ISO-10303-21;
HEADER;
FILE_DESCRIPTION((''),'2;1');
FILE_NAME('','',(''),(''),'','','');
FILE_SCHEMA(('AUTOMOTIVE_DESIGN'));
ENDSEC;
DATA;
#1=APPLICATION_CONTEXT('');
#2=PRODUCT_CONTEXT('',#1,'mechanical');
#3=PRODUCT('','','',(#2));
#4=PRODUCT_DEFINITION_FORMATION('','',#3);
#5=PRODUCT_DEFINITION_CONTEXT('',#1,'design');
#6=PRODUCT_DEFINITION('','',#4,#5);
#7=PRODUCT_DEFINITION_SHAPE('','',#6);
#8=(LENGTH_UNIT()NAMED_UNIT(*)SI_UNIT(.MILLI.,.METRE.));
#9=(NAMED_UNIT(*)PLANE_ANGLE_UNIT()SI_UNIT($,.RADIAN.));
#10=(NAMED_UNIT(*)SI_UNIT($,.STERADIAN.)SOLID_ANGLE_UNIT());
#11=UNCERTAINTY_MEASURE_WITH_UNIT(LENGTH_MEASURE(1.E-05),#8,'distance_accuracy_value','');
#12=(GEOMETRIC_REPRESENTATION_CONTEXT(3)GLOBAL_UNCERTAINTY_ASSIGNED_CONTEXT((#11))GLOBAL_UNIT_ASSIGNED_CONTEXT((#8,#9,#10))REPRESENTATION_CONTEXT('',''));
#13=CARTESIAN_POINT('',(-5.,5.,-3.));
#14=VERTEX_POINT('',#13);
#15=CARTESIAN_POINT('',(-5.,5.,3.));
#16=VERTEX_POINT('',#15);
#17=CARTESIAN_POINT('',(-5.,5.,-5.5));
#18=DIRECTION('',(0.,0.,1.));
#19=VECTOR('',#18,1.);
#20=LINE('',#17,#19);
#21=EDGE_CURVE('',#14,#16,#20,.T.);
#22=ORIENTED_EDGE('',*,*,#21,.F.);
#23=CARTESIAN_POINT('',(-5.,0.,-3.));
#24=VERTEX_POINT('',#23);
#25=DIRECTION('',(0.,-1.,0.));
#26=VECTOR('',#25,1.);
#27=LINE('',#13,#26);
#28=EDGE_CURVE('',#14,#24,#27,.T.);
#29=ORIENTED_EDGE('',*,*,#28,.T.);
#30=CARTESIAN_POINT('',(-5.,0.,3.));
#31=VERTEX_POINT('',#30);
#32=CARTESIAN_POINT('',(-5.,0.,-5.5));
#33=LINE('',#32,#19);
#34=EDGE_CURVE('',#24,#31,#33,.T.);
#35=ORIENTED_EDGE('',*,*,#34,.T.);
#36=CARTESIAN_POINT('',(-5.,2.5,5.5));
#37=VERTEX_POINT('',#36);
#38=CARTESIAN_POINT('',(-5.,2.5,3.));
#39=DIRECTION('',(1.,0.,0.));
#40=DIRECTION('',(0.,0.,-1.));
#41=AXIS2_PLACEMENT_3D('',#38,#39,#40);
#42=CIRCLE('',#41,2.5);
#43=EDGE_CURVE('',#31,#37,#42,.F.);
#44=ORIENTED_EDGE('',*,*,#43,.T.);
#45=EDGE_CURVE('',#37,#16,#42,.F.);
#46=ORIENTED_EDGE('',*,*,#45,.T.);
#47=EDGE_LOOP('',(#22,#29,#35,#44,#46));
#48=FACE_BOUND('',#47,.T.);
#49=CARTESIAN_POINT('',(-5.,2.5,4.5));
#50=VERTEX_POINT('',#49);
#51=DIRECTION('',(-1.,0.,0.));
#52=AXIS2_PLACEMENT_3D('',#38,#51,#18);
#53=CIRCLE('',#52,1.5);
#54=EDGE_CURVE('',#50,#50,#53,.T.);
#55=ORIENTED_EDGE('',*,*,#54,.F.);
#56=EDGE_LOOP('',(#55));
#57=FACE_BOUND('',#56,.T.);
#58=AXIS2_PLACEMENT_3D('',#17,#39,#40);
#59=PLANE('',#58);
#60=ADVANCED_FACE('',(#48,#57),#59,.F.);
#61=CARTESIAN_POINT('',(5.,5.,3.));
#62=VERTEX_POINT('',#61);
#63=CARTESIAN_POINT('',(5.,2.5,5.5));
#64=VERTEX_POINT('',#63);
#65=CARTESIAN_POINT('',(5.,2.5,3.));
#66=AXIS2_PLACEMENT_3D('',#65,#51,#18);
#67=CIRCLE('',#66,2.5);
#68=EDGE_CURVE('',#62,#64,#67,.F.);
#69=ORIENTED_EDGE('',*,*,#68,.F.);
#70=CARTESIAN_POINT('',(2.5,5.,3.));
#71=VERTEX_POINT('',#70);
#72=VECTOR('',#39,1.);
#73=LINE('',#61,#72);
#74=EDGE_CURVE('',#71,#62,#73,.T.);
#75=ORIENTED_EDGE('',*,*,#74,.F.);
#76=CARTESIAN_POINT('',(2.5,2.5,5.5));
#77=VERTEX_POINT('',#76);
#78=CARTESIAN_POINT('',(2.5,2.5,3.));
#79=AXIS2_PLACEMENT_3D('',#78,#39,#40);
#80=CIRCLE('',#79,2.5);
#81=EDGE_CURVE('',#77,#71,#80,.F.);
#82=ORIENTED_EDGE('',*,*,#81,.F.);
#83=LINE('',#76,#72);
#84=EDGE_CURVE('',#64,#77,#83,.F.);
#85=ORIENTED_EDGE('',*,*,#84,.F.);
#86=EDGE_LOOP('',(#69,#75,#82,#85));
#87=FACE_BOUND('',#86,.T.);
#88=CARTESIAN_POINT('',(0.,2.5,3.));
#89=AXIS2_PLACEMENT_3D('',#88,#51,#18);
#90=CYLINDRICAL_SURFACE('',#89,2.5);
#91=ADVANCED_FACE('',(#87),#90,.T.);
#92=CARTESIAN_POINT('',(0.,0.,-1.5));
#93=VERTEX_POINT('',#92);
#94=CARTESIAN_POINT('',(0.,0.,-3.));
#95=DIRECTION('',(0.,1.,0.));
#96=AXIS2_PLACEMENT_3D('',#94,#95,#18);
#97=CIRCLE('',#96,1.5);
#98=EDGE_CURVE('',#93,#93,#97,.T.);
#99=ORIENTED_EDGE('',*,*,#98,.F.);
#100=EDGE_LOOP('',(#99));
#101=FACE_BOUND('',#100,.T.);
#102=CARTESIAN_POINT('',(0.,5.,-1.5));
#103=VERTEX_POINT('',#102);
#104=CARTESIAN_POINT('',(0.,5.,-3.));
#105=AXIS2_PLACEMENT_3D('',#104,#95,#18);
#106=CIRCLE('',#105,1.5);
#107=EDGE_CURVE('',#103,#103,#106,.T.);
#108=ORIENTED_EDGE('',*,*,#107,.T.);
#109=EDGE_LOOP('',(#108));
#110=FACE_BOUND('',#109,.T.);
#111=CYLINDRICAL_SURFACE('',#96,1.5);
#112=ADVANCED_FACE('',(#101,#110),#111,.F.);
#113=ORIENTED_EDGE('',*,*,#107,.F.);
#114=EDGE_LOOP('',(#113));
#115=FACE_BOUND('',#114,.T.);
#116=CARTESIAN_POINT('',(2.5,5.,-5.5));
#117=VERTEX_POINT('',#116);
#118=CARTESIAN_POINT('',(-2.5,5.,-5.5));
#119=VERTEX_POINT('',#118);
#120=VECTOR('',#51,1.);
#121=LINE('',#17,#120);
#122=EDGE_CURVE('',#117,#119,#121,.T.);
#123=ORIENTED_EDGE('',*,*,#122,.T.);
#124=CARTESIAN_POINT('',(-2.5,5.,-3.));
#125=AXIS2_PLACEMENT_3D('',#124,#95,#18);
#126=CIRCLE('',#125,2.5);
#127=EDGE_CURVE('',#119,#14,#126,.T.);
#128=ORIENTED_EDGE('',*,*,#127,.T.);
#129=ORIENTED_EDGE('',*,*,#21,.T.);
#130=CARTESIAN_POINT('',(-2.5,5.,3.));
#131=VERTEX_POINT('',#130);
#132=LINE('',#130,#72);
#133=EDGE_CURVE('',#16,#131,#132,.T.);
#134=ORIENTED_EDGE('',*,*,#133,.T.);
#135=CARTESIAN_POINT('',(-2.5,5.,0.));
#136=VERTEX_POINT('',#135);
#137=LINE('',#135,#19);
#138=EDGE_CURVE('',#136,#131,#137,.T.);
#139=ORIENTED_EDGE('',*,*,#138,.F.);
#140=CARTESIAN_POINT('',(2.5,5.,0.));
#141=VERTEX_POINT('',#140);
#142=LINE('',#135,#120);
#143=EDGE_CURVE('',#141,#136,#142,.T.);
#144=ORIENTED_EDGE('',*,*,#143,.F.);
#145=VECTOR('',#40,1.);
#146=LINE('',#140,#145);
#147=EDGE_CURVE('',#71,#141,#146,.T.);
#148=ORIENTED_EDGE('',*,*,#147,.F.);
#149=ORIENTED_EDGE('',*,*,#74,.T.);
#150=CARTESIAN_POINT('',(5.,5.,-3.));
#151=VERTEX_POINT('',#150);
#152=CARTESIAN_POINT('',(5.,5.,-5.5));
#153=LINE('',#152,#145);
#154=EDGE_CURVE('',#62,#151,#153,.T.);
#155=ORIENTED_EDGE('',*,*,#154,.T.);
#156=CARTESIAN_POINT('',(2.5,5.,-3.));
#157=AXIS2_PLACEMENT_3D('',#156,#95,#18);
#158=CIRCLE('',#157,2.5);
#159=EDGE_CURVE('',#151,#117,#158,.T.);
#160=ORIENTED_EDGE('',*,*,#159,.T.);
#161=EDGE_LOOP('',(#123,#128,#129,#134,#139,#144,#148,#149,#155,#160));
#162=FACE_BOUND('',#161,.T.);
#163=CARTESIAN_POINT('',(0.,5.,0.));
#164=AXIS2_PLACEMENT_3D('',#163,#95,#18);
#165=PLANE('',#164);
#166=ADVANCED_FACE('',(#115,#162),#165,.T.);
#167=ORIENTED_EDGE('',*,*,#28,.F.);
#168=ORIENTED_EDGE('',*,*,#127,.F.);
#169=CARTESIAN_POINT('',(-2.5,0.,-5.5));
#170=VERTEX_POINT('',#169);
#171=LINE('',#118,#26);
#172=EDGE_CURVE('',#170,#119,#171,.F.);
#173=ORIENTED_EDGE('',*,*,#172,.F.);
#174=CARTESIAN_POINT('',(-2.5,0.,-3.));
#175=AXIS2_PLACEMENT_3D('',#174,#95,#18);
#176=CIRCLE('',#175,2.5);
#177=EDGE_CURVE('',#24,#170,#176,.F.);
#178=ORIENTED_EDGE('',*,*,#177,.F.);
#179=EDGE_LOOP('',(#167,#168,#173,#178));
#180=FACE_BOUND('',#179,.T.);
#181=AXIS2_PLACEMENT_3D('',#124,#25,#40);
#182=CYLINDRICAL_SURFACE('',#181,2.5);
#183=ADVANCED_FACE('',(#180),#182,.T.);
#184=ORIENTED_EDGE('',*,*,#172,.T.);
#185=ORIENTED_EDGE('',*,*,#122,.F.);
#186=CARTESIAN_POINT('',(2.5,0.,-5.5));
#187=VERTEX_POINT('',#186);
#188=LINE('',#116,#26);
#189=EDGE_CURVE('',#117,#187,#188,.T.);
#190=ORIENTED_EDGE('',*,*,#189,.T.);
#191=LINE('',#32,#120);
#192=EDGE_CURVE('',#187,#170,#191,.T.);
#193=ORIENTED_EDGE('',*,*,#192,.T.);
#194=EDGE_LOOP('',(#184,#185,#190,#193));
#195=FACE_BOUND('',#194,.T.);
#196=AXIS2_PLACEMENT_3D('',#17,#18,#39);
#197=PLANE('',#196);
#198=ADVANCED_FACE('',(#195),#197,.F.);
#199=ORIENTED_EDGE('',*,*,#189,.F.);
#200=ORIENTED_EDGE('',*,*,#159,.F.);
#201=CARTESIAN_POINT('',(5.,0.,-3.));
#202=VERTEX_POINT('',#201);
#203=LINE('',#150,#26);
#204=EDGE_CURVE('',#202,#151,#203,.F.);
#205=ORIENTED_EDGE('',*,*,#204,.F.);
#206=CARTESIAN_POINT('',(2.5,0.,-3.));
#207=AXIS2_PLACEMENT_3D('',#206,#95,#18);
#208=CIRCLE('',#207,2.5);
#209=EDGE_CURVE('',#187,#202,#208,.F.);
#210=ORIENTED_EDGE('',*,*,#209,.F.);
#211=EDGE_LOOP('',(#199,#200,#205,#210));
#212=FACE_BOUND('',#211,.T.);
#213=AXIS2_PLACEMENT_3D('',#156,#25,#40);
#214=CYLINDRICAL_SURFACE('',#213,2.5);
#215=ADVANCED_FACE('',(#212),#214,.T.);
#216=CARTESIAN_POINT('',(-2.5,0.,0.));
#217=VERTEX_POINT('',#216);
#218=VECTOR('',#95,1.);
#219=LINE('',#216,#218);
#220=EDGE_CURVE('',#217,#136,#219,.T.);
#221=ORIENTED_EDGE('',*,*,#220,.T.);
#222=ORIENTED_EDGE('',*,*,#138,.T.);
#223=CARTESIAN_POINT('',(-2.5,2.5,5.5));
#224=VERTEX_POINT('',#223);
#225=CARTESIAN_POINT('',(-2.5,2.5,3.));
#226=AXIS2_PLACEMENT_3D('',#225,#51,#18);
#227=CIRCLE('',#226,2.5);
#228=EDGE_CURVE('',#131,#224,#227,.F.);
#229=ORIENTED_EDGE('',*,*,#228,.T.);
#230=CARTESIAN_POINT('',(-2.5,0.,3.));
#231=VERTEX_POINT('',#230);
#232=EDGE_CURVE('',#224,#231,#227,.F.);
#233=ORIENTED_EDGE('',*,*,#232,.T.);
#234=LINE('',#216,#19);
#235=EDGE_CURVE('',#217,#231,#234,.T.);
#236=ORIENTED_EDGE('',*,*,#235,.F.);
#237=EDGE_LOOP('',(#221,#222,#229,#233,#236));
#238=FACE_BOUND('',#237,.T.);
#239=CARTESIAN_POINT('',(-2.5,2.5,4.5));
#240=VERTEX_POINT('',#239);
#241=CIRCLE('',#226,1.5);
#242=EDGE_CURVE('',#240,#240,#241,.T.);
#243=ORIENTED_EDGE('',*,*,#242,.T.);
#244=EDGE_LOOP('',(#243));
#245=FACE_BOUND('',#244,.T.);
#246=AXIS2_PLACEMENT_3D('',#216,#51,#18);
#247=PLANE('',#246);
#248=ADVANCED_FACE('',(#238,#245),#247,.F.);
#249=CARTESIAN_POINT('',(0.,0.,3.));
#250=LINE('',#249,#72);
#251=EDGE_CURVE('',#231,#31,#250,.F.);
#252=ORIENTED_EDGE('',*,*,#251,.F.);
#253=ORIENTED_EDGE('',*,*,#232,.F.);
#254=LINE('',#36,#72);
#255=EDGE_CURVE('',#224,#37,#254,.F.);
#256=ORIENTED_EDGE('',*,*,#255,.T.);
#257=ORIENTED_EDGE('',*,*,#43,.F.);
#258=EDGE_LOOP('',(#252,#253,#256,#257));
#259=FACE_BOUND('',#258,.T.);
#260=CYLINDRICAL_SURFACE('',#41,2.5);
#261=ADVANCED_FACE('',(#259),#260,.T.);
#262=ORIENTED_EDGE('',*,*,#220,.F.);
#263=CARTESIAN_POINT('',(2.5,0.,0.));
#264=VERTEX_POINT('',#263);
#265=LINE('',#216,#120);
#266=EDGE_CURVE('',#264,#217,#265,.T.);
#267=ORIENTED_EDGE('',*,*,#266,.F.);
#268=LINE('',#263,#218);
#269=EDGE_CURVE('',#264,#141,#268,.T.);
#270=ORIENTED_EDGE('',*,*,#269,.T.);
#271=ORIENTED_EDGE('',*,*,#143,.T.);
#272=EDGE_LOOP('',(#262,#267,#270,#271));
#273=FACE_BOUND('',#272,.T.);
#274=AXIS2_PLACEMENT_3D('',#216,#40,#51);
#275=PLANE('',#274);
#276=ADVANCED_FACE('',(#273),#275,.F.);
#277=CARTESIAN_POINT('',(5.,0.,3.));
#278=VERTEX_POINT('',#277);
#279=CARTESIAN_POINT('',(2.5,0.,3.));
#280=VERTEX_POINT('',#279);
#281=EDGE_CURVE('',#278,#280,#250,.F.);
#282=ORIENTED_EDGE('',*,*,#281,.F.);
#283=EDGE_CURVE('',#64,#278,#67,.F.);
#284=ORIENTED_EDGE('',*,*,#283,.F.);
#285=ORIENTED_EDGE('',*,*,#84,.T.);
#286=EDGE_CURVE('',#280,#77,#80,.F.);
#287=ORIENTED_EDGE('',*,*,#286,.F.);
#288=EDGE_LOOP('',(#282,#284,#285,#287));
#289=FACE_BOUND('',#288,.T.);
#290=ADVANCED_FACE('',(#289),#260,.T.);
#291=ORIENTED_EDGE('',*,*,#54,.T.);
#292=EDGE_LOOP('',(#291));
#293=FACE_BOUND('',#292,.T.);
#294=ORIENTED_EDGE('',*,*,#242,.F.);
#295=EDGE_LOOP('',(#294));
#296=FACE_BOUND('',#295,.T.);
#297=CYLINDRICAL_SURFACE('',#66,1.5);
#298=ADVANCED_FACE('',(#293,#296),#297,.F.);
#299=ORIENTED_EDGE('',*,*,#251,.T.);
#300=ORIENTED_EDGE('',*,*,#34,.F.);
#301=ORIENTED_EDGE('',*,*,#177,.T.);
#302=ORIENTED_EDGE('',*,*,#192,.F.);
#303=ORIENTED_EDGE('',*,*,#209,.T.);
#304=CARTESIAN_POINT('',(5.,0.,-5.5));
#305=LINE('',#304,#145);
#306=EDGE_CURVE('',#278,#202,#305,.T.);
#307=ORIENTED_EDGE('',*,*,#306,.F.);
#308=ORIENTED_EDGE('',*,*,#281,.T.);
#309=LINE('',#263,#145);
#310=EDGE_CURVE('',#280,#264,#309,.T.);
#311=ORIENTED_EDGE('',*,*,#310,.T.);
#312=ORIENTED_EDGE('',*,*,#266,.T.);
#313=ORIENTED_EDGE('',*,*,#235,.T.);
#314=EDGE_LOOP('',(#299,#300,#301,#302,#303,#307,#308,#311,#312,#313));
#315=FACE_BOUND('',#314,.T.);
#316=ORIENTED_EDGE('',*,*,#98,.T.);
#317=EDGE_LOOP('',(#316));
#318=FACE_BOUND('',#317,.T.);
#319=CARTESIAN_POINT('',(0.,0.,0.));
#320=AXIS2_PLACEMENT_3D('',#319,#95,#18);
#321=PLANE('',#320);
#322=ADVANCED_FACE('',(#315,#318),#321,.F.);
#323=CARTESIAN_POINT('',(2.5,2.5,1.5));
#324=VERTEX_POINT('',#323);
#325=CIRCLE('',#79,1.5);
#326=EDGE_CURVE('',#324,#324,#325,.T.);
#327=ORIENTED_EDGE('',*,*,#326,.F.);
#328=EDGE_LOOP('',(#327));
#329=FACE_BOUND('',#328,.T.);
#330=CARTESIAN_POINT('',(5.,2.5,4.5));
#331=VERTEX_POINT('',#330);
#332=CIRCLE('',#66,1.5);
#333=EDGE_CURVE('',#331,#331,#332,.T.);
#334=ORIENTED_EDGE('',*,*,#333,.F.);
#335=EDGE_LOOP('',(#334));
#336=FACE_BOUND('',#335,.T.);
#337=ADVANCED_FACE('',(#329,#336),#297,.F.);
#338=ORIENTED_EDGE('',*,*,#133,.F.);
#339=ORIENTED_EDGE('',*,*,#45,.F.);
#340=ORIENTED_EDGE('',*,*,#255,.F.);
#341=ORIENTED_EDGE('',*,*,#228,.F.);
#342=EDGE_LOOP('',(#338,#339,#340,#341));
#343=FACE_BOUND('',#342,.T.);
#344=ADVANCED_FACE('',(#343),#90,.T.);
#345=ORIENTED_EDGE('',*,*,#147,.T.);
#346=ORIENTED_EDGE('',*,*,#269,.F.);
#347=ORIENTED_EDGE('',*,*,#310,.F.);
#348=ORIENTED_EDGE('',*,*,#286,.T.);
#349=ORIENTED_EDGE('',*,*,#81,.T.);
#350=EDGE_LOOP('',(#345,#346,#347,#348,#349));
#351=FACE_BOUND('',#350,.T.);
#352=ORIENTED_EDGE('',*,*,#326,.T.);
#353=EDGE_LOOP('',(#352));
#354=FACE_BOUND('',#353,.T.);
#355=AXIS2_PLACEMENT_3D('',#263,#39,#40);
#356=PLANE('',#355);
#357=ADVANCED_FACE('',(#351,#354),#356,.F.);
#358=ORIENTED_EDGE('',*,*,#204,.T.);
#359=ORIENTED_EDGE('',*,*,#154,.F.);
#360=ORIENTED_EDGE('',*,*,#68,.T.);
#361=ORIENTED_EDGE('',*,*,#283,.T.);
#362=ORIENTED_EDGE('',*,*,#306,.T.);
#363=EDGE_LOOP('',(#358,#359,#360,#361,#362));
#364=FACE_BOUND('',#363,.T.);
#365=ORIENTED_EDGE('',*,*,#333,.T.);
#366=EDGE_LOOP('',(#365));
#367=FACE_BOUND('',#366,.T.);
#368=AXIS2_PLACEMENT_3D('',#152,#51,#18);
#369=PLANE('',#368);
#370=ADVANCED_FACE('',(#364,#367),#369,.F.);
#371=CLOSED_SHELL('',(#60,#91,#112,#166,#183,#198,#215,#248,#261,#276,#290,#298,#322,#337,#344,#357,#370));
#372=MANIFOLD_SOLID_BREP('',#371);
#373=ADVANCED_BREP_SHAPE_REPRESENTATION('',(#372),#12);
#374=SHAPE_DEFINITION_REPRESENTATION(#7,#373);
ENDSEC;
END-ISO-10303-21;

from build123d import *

# Parameters (mm, degrees)
SKETCH1_W           = 10
SKETCH1_H           = 11
BOSS_EXTRUDE1_DEPTH = 5
SKETCH3_W           = 5
SKETCH3_H           = 5.5
CUT_EXTRUDE1_DEPTH  = 5
SKETCH4_R           = 1.5
CUT_EXTRUDE2_DEPTH  = 5
SKETCH5_R           = 1.5
CUT_EXTRUDE3_DEPTH  = 10
FILLET1_R           = 2.5
FILLET2_R           = 2.5


with BuildPart() as part:
    # Sketch1 → Boss-Extrude1 (new body)
    with BuildSketch(Plane(origin=(0, 0, 0), x_dir=(1, 0, 0), z_dir=(0, 1, 0))):
        Rectangle(SKETCH1_W, SKETCH1_H)
    extrude(amount=BOSS_EXTRUDE1_DEPTH)

    # Sketch3 → Cut-Extrude1 (cut)
    with BuildSketch(Plane(origin=(0, 5, 0), x_dir=(1, 0, 0), z_dir=(0, 1, 0))):
        with Locations((0, -2.75)):
            Rectangle(SKETCH3_W, SKETCH3_H)
    extrude(amount=-CUT_EXTRUDE1_DEPTH, mode=Mode.SUBTRACT)

    # Sketch4 → Cut-Extrude2 (cut)
    with BuildSketch(Plane(origin=(0, 5, 0), x_dir=(1, 0, 0), z_dir=(0, 1, 0))):
        with Locations(Location((0, 3, 0), (0, 0, 270))):
            Circle(SKETCH4_R)
    extrude(amount=-CUT_EXTRUDE2_DEPTH, mode=Mode.SUBTRACT)

    # Sketch5 → Cut-Extrude3 (cut)
    with BuildSketch(Plane.ZY.offset(5)):
        with Locations((3, 2.5)):
            Circle(SKETCH5_R)
    extrude(amount=-CUT_EXTRUDE3_DEPTH, mode=Mode.SUBTRACT)

    # Fillet1
    fillet1_edges = [part.edges().sort_by_distance(p)[0] for p in [
        (3.75, 0, 5.5),
        (3.75, 5, 5.5),
        (-3.75, 0, 5.5),
        (-3.75, 5, 5.5),
    ]]
    fillet(fillet1_edges, radius=FILLET1_R - 0.0001)  # a hair under: the kernel refuses the full size

    # Fillet2
    fillet2_edges = [part.edges().sort_by_distance(p)[0] for p in [
        (-5, 2.5, -5.5),
        (5, 2.5, -5.5),
    ]]
    fillet(fillet2_edges, radius=FILLET2_R)


solid = part.part
